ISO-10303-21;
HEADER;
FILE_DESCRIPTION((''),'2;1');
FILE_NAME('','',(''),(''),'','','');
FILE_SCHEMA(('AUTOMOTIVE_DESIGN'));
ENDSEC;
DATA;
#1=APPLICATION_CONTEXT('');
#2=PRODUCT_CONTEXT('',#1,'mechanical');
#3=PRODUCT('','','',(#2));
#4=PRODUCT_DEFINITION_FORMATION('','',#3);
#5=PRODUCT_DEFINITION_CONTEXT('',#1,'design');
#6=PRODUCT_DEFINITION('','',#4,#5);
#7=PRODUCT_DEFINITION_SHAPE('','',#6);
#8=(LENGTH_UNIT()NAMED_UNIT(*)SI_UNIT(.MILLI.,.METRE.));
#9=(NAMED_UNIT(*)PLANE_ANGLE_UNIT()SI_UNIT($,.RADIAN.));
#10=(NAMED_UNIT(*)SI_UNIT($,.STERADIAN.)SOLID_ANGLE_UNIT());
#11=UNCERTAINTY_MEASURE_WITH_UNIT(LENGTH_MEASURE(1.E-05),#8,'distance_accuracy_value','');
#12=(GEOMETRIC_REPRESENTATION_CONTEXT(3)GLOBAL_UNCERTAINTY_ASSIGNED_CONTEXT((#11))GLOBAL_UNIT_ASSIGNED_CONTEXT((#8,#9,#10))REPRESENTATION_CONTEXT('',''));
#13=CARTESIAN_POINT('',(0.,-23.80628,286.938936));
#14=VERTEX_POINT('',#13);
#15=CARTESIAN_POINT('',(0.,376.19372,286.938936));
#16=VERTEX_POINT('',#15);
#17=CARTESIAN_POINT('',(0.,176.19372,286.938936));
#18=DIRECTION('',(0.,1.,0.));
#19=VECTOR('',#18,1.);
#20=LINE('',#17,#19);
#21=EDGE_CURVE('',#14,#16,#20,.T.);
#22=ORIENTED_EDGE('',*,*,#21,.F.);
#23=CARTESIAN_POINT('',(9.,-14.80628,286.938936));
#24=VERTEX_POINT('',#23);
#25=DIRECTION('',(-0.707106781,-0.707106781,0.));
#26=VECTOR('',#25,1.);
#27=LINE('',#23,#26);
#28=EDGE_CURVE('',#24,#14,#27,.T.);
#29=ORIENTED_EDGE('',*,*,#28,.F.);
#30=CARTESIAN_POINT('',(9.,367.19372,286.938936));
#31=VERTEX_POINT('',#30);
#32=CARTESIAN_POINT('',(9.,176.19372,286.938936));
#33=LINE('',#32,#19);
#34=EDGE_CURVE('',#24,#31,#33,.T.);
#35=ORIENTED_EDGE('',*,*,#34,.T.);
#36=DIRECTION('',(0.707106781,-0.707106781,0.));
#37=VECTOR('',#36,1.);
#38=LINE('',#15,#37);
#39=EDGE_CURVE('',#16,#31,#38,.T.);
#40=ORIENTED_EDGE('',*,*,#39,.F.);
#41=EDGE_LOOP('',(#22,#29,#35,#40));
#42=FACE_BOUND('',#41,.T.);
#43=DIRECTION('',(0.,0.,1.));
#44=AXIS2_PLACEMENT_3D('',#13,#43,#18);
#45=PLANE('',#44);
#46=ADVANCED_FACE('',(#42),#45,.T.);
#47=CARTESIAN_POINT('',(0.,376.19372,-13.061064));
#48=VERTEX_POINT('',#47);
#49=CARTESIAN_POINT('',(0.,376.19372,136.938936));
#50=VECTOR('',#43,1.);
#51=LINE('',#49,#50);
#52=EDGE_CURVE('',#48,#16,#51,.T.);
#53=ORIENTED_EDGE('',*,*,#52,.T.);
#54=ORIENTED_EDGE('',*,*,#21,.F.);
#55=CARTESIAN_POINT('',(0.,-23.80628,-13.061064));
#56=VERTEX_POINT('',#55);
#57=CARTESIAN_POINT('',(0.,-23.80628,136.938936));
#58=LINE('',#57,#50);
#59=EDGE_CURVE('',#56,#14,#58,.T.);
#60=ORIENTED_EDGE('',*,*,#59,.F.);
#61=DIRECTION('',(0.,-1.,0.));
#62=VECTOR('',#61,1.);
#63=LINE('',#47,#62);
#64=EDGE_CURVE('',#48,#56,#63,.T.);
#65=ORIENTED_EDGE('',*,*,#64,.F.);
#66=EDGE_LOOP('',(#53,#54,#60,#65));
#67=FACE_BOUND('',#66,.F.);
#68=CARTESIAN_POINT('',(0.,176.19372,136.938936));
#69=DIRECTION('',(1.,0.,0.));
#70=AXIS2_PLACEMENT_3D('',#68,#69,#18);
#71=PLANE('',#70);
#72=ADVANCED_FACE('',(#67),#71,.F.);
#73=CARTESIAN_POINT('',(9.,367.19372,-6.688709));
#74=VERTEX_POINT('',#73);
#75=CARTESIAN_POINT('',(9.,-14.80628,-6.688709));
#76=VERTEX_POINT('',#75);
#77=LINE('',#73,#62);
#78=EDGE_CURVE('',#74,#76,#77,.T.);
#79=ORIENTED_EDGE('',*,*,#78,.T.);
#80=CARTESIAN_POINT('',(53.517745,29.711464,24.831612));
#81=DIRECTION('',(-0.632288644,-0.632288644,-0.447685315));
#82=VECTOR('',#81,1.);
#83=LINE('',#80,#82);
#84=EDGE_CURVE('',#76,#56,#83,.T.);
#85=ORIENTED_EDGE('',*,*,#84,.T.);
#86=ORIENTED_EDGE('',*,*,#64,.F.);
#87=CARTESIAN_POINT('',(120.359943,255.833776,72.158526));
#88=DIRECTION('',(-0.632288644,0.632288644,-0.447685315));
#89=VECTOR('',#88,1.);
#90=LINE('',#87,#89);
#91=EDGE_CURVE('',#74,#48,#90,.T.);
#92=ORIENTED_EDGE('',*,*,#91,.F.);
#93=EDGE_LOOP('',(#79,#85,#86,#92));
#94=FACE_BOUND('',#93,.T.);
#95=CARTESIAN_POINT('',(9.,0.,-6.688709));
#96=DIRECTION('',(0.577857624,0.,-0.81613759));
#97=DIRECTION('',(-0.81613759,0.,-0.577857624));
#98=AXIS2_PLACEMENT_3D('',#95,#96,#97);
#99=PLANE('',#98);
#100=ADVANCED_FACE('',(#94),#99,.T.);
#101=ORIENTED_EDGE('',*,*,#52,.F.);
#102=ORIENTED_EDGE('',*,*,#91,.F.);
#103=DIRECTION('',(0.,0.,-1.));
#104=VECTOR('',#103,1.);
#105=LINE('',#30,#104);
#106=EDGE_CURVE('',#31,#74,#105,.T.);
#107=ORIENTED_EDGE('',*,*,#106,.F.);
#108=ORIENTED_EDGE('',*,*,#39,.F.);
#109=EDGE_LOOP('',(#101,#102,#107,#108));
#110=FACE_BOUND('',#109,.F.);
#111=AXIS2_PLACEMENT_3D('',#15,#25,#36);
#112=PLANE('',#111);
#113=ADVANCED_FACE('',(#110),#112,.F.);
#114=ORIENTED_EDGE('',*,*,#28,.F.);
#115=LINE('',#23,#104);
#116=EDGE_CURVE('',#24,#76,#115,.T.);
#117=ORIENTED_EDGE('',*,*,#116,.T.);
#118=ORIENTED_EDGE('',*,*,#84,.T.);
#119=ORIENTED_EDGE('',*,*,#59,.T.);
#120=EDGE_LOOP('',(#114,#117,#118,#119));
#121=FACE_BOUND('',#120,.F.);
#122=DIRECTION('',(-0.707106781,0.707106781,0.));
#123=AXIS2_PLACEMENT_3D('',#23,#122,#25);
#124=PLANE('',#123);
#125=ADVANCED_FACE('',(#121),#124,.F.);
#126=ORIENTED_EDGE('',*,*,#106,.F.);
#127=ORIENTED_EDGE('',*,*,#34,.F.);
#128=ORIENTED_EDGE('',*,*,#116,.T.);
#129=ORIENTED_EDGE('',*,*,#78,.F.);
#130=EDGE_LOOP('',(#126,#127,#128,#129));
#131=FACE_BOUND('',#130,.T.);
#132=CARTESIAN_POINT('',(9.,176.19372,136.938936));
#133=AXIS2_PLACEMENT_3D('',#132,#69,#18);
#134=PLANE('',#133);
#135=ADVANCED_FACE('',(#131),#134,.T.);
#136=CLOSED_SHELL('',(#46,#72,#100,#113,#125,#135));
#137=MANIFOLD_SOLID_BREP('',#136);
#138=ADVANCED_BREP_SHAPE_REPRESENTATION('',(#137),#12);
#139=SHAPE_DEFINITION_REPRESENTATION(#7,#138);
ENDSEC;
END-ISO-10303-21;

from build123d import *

# Parameters (mm, degrees)
F0_W     = 400
F0_H     = 300
F1_DEPTH = 9
F3_DEPTH = 300
F5_DEPTH = 400
F6_DEPTH = 30


# Not quite as in the source:
# - a feature names something its author has since deleted; it is built from what else it names


with BuildPart() as f1:
    # F0 (on Right) → F1 (new body)
    with BuildSketch(Plane.YZ):
        with Locations((176.1937195063, 136.9389362159)):
            Rectangle(F0_W, F0_H)
    extrude(amount=F1_DEPTH)

    # F2 (on face) → F3 (cut)
    with BuildSketch(Plane.XY.offset(286.9389362159)):
        Polygon((9, 376.1937195063), (0, 376.1937195063), (9, 367.1937195063), align=None)
        Polygon((9, -14.8062804937), (0, -23.8062804937), (9, -23.8062804937), align=None)
    extrude(amount=-F3_DEPTH, mode=Mode.SUBTRACT)

    # F4 (on Front) → F5 (cut)
    with BuildSketch(Plane.XZ):
        Polygon((9, -6.68870858), (0, -13.0610637841), (9, -13.0610637841), align=None)
    extrude(amount=-F5_DEPTH, mode=Mode.SUBTRACT)

    # F4 (on Front) → F6 (cut)
    with BuildSketch(Plane.XZ):
        Polygon((9, -6.68870858), (0, -13.0610637841), (9, -13.0610637841), align=None)
    extrude(amount=F6_DEPTH, mode=Mode.SUBTRACT)


solid = f1.part
